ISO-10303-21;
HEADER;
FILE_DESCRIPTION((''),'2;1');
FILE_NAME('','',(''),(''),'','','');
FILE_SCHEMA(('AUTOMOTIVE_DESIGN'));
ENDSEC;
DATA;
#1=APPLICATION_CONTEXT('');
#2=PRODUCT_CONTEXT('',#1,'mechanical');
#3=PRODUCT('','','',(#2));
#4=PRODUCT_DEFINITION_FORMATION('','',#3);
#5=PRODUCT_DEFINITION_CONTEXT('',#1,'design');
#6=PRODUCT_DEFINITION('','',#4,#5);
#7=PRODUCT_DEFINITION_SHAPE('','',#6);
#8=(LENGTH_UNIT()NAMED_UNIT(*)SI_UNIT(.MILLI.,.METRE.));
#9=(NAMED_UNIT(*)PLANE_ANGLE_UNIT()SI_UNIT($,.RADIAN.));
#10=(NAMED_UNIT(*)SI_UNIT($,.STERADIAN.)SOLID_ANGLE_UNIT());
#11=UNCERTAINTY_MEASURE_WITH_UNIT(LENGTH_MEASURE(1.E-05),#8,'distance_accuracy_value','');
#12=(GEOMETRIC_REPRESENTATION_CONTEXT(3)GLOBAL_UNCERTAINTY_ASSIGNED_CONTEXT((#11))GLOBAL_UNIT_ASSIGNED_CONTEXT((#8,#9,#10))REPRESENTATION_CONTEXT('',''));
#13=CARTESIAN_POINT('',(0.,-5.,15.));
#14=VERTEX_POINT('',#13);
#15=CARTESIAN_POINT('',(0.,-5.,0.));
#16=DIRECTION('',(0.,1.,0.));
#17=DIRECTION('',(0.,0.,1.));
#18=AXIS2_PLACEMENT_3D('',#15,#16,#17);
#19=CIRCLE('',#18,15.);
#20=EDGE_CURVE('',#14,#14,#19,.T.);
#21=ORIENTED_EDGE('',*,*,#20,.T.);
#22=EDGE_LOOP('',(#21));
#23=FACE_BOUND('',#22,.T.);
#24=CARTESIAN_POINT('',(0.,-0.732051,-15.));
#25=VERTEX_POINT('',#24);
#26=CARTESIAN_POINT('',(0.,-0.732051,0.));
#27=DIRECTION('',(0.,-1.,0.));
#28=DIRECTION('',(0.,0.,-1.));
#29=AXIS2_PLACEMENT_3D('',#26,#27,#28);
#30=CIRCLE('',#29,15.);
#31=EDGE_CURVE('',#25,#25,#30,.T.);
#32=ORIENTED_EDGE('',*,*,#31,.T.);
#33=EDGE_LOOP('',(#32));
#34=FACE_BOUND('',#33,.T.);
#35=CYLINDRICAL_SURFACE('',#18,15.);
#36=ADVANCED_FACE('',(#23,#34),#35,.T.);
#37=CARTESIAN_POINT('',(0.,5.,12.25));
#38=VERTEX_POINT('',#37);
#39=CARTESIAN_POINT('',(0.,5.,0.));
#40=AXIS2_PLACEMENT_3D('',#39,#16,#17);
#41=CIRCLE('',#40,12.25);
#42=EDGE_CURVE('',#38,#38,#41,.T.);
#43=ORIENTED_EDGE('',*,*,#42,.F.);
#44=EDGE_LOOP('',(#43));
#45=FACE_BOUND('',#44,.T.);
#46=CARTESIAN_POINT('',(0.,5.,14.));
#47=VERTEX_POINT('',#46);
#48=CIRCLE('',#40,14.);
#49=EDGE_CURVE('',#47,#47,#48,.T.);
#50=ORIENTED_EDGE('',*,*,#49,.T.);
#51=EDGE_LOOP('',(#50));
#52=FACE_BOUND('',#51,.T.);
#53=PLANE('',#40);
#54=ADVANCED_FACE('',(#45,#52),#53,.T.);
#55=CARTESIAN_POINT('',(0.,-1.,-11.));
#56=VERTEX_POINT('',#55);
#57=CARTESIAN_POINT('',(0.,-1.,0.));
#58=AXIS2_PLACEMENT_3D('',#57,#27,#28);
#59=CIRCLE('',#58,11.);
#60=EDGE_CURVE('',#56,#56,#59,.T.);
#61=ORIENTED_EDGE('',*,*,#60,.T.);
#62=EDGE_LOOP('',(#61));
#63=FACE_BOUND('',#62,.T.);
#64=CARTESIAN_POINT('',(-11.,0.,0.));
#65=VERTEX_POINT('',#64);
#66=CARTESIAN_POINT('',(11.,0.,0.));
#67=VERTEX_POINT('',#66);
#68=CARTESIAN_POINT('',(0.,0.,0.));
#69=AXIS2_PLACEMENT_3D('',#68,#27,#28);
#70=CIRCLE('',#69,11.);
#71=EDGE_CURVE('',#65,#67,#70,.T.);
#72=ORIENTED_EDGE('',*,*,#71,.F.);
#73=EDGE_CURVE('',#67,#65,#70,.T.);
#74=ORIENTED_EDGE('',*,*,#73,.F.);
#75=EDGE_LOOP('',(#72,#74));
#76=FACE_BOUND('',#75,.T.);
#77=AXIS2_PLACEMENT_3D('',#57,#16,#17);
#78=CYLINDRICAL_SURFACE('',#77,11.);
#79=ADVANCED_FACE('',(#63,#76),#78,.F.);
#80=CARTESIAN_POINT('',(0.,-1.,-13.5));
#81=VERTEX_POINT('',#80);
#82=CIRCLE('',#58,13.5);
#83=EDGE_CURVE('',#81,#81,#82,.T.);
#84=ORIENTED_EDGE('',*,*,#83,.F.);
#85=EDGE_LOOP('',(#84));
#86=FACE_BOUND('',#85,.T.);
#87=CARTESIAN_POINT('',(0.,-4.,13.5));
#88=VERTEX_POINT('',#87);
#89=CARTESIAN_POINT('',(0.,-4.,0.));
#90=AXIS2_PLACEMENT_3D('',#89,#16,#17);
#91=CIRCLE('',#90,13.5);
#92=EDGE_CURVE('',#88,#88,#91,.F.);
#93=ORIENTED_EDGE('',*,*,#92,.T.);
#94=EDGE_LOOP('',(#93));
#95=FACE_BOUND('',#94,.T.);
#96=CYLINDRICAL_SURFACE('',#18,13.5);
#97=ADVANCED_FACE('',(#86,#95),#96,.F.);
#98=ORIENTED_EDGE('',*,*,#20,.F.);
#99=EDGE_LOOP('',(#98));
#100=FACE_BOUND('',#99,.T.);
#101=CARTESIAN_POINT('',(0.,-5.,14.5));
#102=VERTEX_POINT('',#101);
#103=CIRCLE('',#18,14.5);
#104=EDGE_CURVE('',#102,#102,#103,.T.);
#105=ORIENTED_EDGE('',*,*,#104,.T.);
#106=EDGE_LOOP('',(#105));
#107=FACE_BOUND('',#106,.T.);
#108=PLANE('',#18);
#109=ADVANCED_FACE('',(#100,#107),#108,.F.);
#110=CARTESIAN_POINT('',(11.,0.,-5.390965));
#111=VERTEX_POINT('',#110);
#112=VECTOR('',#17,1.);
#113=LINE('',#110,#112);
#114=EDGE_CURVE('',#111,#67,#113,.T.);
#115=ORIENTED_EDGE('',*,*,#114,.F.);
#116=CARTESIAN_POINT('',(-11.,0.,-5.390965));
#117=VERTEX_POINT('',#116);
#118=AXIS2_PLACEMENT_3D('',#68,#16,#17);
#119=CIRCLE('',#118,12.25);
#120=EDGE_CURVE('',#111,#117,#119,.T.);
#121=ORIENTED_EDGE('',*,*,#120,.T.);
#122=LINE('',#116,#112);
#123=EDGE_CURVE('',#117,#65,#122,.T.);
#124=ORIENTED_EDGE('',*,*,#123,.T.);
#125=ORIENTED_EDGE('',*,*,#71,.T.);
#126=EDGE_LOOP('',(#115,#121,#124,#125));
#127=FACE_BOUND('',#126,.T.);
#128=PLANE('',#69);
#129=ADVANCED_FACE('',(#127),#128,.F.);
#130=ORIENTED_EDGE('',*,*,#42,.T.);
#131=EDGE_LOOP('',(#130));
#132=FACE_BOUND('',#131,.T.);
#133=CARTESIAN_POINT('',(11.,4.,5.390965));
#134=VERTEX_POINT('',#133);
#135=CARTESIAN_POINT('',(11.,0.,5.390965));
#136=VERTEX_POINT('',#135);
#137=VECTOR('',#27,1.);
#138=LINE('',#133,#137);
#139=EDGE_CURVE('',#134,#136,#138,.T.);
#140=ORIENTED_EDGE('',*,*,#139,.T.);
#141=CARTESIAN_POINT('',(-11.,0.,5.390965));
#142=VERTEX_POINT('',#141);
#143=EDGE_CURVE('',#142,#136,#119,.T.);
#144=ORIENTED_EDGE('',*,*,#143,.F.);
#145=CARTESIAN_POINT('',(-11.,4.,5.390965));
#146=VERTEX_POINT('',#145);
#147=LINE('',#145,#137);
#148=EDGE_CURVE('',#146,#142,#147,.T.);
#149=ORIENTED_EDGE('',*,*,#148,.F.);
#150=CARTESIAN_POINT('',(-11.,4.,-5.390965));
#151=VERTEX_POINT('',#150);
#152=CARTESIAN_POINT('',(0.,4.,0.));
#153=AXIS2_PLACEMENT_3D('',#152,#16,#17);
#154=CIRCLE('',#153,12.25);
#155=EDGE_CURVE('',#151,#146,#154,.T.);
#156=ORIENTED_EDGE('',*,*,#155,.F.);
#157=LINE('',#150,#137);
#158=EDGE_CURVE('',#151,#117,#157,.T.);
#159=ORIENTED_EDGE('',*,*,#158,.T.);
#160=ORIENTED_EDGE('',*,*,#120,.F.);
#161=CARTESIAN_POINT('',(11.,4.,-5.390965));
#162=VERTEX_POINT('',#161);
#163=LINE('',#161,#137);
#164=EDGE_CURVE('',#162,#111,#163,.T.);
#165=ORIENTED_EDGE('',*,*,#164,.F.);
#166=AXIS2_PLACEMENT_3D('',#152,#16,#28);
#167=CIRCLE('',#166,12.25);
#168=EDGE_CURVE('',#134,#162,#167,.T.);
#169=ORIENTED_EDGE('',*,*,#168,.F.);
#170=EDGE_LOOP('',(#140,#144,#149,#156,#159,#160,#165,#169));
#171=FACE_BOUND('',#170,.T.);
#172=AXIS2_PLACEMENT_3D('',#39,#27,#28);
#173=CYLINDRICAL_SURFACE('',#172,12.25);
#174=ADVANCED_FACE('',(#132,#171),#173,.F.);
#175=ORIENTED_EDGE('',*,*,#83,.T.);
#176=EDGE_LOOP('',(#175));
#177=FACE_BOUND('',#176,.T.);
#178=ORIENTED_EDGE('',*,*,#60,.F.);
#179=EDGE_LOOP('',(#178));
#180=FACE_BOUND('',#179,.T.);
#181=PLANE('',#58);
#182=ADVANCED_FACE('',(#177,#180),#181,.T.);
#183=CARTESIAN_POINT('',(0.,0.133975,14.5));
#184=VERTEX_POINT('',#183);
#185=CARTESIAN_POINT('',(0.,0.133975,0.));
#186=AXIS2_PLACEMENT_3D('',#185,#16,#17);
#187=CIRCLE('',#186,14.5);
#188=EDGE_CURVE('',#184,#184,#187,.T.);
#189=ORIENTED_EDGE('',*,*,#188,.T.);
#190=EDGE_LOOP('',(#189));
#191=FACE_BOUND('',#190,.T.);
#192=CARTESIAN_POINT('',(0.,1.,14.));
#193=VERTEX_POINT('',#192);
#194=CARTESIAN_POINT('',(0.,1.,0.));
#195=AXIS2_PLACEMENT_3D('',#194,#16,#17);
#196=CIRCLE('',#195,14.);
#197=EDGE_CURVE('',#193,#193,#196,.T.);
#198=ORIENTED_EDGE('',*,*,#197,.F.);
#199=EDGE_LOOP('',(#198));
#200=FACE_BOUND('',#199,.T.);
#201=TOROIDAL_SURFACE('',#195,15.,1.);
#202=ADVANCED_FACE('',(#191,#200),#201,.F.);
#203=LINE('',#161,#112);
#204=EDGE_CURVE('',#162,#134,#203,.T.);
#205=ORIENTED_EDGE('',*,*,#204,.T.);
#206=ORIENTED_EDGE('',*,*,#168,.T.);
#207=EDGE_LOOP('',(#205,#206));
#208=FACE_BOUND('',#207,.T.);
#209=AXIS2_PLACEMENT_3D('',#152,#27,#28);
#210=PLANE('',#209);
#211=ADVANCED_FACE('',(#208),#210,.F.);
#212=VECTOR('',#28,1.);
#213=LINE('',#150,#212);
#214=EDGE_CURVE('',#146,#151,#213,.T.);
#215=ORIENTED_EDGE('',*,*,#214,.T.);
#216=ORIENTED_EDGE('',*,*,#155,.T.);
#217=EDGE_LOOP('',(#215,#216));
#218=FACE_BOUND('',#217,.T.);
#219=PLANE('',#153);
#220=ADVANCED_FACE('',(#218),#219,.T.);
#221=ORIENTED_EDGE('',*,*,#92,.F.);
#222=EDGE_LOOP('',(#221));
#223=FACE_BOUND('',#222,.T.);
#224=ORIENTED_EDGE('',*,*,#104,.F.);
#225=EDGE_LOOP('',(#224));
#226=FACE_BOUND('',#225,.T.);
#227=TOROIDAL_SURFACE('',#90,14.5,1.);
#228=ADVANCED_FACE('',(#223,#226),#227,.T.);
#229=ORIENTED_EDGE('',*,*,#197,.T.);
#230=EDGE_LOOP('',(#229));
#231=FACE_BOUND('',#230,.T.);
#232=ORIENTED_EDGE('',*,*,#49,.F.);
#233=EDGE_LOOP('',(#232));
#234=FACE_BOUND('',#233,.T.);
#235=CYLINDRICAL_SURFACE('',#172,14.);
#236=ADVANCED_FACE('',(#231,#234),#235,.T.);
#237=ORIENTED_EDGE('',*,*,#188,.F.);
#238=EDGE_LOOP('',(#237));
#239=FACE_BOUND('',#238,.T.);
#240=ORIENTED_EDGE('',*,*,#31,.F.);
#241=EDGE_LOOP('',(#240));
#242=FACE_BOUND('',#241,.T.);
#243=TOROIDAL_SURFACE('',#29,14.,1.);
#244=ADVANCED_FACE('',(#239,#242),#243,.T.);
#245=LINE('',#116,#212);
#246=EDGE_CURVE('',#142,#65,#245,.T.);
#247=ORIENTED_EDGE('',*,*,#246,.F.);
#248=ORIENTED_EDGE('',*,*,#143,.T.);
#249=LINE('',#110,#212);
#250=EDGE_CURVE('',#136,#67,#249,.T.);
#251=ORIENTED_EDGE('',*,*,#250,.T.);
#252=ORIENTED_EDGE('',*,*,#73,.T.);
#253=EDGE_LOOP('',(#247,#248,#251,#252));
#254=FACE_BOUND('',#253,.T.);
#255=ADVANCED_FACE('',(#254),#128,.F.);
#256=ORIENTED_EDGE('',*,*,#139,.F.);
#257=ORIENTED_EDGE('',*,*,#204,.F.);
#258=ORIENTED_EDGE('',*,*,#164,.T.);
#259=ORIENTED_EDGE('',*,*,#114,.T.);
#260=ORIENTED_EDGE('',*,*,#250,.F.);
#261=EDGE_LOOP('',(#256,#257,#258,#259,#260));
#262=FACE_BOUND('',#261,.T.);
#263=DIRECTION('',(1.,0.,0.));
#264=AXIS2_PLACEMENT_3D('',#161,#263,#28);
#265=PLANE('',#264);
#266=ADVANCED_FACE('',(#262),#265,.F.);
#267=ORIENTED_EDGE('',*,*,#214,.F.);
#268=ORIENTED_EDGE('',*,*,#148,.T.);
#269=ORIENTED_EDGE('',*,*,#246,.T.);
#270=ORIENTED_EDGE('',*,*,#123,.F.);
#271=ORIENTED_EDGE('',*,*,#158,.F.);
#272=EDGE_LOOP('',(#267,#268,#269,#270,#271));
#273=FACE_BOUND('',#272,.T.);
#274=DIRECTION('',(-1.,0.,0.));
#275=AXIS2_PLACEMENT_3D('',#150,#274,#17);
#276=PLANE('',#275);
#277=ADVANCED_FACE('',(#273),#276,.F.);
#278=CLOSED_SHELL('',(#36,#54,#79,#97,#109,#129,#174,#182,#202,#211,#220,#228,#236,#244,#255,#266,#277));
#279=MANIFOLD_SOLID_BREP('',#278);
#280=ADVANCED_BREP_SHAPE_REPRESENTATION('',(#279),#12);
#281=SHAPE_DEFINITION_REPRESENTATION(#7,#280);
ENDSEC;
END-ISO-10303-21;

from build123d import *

# Parameters (mm, degrees)
SKETCH_1_R      = 14
SKETCH_1_R_2    = 12.25
EXTRUDE_1_DEPTH = 5
EXTRUDE_2_DEPTH = 4
SKETCH_3_R      = 15
SKETCH_3_R_2    = 13.5
EXTRUDE_3_DEPTH = 5
FILLET_2_R      = 1
FILLET_3_R      = 1
SKETCH_4_R      = 13.5
SKETCH_4_R_2    = 11
EXTRUDE_4_DEPTH = 1
FILLET_5_R      = 1


with BuildPart() as part:
    # 草图1 → 凸台-拉伸1 (new body)
    with BuildSketch(Plane(origin=(0, 0, 0), x_dir=(1, 0, 0), z_dir=(0, 1, 0))):
        with Locations(Location((0, 0, 0), (0, 0, 270))):
            Circle(SKETCH_1_R)
        with Locations(Location((0, 0, 0), (0, 0, 270))):
            Circle(SKETCH_1_R_2, mode=Mode.SUBTRACT)
    extrude(amount=EXTRUDE_1_DEPTH)

    # 草图2 → 凸台-拉伸2 (add)
    with BuildSketch(Plane(origin=(0, 0, 0), x_dir=(1, 0, 0), z_dir=(0, 1, 0))):
        with BuildLine():
            Line((-11, 5.390964663), (-11, -5.390964663))
            ThreePointArc((-11, -5.390964663), (-12.25, 0), (-11, 5.390964663))
        make_face()
        with BuildLine():
            Line((11, 5.390964663), (11, -5.390964663))
            ThreePointArc((11, -5.390964663), (12.25, 0), (11, 5.390964663))
        make_face()
    extrude(amount=EXTRUDE_2_DEPTH)

    # 草图3 → 凸台-拉伸3 (add)
    with BuildSketch(Plane(origin=(0, 0, 0), x_dir=(1, 0, 0), z_dir=(0, 1, 0))):
        with Locations(Location((0, 0, 0), (0, 0, 270))):
            Circle(SKETCH_3_R)
        with Locations(Location((0, 0, 0), (0, 0, 270))):
            Circle(SKETCH_3_R_2, mode=Mode.SUBTRACT)
    extrude(amount=-EXTRUDE_3_DEPTH)

    # 圆角2
    fillet_2_edges = [part.edges().sort_by_distance(p)[0] for p in [
        (0, 0, -14),
    ]]
    fillet(fillet_2_edges, radius=FILLET_2_R - 0.0001)  # a hair under: the kernel refuses the full size

    # 圆角3
    fillet_3_edges = [part.edges().sort_by_distance(p)[0] for p in [
        (0, 0, -15),
    ]]
    fillet(fillet_3_edges, radius=FILLET_3_R)

    # 草图4 → 凸台-拉伸4 (add)
    with BuildSketch(Plane.XZ):
        with Locations(Location((0, 0, 0), (0, 0, 90))):
            Circle(SKETCH_4_R)
        Circle(SKETCH_4_R_2, mode=Mode.SUBTRACT)
    extrude(amount=EXTRUDE_4_DEPTH)

    # 圆角5
    fillet_5_edges = [part.edges().sort_by_distance(p)[0] for p in [
        (0, -5, -13.5),
    ]]
    fillet(fillet_5_edges, radius=FILLET_5_R)


solid = part.part
